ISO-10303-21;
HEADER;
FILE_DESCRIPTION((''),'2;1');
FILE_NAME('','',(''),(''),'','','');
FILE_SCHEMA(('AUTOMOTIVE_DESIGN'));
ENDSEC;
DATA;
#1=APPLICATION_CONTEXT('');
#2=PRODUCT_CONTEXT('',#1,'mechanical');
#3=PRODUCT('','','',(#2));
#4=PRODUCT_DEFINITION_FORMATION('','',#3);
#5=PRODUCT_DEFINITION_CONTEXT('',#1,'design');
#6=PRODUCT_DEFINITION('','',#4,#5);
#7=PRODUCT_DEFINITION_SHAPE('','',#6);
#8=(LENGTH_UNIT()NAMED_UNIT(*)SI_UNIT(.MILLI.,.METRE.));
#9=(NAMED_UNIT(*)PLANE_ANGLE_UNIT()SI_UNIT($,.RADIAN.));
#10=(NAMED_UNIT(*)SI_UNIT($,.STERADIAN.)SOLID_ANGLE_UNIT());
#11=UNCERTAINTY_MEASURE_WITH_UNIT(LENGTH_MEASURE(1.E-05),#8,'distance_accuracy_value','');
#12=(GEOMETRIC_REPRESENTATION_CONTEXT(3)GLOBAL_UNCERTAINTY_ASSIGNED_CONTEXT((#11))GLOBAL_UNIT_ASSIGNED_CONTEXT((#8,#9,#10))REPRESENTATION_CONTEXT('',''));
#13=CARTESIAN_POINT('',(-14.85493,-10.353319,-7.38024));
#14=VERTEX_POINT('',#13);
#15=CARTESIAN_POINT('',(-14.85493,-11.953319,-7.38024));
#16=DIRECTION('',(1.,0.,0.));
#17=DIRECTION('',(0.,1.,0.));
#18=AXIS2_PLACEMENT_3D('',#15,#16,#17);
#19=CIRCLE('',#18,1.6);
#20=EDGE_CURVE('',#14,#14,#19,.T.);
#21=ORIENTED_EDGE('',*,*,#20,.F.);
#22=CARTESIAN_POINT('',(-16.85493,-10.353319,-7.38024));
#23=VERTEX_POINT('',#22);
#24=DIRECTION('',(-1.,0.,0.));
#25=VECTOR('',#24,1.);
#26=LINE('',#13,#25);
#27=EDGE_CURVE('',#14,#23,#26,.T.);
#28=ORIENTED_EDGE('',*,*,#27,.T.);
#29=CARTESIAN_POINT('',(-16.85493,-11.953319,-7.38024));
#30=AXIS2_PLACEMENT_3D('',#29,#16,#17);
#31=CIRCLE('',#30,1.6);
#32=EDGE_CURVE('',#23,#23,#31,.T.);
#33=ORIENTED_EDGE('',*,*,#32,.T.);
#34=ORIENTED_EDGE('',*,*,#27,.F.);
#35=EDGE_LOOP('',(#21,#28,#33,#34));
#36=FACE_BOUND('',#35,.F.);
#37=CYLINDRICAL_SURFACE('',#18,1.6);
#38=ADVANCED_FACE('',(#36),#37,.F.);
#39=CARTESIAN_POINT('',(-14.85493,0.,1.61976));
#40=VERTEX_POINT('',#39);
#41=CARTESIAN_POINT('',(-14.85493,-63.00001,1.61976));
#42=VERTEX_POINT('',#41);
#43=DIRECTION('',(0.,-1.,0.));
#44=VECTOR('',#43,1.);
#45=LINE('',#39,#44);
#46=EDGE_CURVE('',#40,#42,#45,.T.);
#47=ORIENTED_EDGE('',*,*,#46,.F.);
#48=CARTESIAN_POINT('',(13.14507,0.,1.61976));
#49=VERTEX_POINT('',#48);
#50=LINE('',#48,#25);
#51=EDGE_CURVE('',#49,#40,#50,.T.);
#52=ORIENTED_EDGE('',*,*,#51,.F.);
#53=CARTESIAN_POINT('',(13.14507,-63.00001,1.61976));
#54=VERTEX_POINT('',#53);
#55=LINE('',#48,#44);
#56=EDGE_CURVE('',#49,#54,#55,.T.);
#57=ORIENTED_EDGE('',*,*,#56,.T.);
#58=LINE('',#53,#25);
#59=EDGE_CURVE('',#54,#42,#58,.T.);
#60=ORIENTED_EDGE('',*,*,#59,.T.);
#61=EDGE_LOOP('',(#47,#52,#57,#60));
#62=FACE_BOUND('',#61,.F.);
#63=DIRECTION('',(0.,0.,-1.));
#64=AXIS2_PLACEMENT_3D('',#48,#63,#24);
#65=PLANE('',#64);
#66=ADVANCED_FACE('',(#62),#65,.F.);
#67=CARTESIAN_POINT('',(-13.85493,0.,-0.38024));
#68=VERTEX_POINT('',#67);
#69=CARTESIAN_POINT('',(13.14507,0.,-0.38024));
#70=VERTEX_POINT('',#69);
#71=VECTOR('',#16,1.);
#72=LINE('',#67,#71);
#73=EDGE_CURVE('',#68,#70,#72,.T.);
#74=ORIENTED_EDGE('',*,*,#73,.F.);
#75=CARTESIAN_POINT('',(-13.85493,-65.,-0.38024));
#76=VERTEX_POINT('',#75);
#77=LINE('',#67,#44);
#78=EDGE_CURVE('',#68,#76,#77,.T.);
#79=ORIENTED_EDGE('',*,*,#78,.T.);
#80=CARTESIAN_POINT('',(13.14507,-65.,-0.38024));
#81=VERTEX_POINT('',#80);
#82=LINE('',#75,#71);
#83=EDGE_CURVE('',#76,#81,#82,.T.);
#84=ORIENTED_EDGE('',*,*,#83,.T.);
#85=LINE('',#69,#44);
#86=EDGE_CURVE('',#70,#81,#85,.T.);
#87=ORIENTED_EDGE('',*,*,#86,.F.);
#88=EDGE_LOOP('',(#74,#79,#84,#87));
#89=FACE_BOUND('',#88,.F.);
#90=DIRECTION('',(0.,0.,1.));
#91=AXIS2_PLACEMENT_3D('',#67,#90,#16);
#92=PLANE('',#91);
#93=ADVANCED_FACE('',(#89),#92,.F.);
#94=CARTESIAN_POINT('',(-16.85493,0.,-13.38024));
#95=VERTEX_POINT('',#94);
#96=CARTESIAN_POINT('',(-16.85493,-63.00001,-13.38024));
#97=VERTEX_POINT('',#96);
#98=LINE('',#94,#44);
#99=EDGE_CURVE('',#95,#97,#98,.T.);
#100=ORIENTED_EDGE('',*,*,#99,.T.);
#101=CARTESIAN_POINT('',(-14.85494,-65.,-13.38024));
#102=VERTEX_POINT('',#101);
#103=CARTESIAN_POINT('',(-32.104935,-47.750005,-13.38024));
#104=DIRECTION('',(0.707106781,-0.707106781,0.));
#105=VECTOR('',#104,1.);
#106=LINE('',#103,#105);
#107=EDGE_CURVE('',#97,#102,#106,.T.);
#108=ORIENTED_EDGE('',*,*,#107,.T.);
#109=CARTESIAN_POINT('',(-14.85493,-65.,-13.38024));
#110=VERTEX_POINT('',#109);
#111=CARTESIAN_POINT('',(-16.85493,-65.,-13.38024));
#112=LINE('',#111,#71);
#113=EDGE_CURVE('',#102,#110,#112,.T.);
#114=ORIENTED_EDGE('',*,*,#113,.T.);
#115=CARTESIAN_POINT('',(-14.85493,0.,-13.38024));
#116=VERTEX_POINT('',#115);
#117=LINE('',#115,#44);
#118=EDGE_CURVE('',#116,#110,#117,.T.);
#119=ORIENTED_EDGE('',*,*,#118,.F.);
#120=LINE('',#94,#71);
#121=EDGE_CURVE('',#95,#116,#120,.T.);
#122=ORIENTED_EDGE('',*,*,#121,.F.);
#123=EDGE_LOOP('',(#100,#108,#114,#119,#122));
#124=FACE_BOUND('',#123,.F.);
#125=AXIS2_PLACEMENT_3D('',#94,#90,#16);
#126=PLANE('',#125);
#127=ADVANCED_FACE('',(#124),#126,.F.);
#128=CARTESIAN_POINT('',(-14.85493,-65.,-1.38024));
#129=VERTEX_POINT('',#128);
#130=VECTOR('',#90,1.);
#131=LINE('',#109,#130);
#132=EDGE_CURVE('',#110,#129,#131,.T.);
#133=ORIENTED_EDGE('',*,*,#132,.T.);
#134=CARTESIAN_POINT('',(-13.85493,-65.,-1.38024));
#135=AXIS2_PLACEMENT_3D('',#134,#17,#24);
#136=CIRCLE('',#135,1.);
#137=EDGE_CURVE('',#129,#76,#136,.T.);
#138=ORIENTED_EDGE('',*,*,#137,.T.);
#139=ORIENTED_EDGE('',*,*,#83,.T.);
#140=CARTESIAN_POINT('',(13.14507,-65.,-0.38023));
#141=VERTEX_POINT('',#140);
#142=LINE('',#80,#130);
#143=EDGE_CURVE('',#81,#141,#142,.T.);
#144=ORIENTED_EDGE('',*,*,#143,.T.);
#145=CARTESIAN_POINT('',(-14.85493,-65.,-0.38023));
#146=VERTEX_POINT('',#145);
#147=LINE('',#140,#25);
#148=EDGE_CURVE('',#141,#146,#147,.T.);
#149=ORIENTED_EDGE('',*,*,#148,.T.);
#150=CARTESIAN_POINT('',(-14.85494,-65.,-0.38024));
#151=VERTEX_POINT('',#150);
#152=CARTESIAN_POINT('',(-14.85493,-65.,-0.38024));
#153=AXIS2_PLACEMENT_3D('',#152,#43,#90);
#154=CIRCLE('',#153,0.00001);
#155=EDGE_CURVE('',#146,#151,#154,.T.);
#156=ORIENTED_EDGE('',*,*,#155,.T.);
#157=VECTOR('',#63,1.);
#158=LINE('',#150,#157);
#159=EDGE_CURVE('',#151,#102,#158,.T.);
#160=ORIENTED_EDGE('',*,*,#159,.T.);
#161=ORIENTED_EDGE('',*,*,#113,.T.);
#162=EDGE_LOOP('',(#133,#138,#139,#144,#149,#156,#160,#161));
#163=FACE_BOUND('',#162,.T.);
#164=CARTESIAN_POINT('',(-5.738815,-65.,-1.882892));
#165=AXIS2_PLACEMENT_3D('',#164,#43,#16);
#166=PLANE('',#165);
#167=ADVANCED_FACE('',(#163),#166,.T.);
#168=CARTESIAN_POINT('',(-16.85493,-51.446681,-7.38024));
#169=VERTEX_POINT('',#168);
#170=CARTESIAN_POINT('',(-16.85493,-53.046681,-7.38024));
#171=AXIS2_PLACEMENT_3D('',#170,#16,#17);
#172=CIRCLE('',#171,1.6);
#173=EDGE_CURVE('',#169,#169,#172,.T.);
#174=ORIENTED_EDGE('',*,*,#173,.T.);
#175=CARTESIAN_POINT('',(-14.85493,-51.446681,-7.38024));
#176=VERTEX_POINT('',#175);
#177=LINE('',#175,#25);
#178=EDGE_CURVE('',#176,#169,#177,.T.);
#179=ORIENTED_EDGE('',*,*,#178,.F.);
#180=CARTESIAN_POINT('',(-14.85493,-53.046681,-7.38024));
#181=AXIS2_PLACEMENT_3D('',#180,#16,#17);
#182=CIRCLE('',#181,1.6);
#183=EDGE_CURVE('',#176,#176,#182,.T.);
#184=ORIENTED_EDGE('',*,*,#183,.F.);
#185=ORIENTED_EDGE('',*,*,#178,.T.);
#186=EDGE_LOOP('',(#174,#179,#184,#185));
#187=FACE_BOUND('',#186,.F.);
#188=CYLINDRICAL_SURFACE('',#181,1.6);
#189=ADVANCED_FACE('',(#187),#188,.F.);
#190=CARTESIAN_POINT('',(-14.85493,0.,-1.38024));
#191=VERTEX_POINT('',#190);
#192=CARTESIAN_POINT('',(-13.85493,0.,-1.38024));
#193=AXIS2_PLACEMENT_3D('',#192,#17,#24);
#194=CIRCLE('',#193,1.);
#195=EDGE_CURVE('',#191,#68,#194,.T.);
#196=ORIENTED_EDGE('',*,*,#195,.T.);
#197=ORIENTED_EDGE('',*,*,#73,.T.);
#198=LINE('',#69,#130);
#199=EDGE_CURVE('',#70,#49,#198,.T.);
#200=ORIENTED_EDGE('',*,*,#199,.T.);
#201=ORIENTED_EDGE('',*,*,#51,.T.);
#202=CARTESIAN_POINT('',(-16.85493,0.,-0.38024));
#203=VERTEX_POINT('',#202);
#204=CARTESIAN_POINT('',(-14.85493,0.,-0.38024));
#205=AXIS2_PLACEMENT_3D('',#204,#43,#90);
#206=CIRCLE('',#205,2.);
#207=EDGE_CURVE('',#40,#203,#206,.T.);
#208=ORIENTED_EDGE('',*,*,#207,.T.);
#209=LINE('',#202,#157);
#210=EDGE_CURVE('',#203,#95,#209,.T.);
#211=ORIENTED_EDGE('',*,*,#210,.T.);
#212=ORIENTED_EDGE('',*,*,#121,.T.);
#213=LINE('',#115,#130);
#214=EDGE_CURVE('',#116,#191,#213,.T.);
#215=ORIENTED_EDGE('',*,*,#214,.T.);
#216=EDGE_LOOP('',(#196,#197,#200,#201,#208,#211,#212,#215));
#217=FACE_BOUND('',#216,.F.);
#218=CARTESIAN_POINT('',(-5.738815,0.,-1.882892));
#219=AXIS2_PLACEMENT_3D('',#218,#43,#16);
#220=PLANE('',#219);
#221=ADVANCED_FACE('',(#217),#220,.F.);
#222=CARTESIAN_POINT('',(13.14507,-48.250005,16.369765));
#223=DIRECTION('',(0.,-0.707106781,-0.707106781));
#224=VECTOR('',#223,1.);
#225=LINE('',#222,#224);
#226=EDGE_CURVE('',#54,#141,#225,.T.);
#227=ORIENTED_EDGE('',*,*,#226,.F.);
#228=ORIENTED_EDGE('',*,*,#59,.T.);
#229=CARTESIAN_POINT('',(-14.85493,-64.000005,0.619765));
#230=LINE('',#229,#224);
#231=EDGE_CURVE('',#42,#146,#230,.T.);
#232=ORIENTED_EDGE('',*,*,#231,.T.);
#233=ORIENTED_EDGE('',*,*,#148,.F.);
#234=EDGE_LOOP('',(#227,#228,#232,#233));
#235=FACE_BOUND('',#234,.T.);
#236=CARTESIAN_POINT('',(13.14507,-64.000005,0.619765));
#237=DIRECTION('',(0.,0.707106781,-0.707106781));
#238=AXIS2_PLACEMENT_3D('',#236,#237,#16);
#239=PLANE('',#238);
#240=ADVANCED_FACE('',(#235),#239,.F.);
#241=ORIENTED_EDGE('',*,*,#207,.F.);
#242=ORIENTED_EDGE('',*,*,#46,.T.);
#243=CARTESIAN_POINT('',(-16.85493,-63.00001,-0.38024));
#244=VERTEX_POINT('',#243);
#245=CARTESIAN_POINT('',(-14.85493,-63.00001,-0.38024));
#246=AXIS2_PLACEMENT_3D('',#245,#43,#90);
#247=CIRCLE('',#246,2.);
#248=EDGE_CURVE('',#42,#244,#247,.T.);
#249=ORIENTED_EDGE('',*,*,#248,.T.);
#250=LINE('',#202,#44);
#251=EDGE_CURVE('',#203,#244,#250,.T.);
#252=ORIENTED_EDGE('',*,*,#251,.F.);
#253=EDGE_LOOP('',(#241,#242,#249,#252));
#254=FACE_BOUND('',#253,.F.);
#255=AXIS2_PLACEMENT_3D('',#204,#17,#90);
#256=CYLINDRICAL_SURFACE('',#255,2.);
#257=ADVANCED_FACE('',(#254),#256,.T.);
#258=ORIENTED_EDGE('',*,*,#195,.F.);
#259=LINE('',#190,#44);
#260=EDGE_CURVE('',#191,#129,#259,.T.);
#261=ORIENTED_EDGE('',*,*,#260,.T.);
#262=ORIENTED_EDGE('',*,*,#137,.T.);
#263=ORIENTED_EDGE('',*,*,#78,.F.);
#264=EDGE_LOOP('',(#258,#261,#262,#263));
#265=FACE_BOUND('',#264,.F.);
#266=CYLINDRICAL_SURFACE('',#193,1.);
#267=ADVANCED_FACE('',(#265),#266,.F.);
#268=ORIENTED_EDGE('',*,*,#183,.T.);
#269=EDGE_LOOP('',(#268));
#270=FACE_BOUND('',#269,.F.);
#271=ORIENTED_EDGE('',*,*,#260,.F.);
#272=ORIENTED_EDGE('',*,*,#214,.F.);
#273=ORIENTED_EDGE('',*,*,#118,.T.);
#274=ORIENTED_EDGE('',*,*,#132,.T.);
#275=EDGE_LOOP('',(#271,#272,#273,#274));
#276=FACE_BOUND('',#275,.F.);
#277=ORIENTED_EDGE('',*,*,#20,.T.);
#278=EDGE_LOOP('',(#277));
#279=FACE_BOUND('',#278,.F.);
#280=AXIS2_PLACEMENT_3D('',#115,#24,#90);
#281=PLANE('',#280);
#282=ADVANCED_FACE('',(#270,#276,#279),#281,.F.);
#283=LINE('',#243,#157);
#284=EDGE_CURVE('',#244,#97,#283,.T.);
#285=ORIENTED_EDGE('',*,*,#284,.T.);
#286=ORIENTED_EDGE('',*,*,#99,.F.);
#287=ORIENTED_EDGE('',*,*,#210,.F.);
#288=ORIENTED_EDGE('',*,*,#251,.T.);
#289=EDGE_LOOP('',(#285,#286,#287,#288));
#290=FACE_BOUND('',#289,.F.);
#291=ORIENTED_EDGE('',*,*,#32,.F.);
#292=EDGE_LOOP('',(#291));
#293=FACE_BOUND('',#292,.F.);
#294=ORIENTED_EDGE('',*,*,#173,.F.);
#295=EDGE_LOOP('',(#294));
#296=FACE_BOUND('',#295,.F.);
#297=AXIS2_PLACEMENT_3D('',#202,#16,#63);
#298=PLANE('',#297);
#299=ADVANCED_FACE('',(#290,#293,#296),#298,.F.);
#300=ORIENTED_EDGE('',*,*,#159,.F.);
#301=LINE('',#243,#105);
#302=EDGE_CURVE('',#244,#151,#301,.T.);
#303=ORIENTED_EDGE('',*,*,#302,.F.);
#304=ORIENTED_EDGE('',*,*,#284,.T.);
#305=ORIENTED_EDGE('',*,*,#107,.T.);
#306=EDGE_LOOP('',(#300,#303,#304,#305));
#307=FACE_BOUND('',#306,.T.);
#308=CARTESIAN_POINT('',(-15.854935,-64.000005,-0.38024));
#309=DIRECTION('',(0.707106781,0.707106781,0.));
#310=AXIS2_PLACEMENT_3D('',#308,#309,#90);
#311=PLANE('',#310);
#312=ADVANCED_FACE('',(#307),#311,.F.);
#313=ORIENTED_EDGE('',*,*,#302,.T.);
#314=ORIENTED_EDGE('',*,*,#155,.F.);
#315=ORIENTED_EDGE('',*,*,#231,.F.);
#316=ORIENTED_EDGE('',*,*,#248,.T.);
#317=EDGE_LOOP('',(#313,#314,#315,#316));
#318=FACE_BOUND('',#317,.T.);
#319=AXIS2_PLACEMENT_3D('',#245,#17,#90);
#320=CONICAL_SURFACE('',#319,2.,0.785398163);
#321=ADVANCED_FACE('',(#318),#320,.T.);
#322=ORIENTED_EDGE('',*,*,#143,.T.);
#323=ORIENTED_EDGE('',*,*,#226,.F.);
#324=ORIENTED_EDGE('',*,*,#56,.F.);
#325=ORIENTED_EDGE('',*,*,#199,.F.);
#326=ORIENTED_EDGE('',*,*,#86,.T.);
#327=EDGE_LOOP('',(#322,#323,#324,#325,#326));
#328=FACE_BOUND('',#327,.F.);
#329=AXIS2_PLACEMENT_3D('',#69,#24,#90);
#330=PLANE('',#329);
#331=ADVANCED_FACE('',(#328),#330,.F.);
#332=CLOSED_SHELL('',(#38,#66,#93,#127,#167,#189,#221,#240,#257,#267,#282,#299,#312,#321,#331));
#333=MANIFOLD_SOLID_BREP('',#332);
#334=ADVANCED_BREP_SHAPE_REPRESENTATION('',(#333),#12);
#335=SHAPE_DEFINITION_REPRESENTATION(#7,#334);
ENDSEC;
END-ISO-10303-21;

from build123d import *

# Parameters (mm, degrees)
F1_DEPTH = 65
F2_SIZE  = 1.99999
F3_R     = 1.6
F4_DEPTH = 2


# Not quite as in the source:
# - a fillet or chamfer is up to 0.001 mm smaller than in the source, because OpenCascade refuses the exact size


with BuildPart() as f1:
    # F0 (on Front) → F1 (new body)
    with BuildSketch(Plane.XZ):
        with BuildLine():
            Line((-16.8549300951, -0.3802398592), (-16.8549300951, -13.3802398592))
            Line((-16.8549300951, -13.3802398592), (-14.8549300951, -13.3802398592))
            Line((-14.8549300951, -13.3802398592), (-14.8549300951, -1.3802398592))
            ThreePointArc((-14.8549300951, -1.3802398592), (-14.5620368763, -0.673133078), (-13.8549300951, -0.3802398592))
            Line((-13.8549300951, -0.3802398592), (13.1450699049, -0.3802398592))
            Line((13.1450699049, -0.3802398592), (13.1450699049, 1.6197601408))
            Line((13.1450699049, 1.6197601408), (-14.8549300951, 1.6197601408))
            ThreePointArc((-14.8549300951, 1.6197601408), (-16.2691436574, 1.0339737031), (-16.8549300951, -0.3802398592))
        make_face()
    extrude(amount=F1_DEPTH)

    # F2 (size 2 in the source; OpenCascade refuses exactly that, so slightly less here)
    f2_edges = [f1.edges().sort_by_distance(p)[0] for p in [
        (-16.85493, -65, -6.88024),
    ]]
    chamfer(f2_edges, length=F2_SIZE)

    # F3 (on face) → F4 (cut, through all)
    with BuildSketch(Plane.YZ.offset(-14.8549300951)):
        with Locations((-53.0466809869, -7.3802398592)):
            Circle(F3_R)
        with Locations((-11.9533190131, -7.3802398592)):
            Circle(F3_R)
    extrude(amount=-F4_DEPTH, mode=Mode.SUBTRACT)


solid = f1.part
